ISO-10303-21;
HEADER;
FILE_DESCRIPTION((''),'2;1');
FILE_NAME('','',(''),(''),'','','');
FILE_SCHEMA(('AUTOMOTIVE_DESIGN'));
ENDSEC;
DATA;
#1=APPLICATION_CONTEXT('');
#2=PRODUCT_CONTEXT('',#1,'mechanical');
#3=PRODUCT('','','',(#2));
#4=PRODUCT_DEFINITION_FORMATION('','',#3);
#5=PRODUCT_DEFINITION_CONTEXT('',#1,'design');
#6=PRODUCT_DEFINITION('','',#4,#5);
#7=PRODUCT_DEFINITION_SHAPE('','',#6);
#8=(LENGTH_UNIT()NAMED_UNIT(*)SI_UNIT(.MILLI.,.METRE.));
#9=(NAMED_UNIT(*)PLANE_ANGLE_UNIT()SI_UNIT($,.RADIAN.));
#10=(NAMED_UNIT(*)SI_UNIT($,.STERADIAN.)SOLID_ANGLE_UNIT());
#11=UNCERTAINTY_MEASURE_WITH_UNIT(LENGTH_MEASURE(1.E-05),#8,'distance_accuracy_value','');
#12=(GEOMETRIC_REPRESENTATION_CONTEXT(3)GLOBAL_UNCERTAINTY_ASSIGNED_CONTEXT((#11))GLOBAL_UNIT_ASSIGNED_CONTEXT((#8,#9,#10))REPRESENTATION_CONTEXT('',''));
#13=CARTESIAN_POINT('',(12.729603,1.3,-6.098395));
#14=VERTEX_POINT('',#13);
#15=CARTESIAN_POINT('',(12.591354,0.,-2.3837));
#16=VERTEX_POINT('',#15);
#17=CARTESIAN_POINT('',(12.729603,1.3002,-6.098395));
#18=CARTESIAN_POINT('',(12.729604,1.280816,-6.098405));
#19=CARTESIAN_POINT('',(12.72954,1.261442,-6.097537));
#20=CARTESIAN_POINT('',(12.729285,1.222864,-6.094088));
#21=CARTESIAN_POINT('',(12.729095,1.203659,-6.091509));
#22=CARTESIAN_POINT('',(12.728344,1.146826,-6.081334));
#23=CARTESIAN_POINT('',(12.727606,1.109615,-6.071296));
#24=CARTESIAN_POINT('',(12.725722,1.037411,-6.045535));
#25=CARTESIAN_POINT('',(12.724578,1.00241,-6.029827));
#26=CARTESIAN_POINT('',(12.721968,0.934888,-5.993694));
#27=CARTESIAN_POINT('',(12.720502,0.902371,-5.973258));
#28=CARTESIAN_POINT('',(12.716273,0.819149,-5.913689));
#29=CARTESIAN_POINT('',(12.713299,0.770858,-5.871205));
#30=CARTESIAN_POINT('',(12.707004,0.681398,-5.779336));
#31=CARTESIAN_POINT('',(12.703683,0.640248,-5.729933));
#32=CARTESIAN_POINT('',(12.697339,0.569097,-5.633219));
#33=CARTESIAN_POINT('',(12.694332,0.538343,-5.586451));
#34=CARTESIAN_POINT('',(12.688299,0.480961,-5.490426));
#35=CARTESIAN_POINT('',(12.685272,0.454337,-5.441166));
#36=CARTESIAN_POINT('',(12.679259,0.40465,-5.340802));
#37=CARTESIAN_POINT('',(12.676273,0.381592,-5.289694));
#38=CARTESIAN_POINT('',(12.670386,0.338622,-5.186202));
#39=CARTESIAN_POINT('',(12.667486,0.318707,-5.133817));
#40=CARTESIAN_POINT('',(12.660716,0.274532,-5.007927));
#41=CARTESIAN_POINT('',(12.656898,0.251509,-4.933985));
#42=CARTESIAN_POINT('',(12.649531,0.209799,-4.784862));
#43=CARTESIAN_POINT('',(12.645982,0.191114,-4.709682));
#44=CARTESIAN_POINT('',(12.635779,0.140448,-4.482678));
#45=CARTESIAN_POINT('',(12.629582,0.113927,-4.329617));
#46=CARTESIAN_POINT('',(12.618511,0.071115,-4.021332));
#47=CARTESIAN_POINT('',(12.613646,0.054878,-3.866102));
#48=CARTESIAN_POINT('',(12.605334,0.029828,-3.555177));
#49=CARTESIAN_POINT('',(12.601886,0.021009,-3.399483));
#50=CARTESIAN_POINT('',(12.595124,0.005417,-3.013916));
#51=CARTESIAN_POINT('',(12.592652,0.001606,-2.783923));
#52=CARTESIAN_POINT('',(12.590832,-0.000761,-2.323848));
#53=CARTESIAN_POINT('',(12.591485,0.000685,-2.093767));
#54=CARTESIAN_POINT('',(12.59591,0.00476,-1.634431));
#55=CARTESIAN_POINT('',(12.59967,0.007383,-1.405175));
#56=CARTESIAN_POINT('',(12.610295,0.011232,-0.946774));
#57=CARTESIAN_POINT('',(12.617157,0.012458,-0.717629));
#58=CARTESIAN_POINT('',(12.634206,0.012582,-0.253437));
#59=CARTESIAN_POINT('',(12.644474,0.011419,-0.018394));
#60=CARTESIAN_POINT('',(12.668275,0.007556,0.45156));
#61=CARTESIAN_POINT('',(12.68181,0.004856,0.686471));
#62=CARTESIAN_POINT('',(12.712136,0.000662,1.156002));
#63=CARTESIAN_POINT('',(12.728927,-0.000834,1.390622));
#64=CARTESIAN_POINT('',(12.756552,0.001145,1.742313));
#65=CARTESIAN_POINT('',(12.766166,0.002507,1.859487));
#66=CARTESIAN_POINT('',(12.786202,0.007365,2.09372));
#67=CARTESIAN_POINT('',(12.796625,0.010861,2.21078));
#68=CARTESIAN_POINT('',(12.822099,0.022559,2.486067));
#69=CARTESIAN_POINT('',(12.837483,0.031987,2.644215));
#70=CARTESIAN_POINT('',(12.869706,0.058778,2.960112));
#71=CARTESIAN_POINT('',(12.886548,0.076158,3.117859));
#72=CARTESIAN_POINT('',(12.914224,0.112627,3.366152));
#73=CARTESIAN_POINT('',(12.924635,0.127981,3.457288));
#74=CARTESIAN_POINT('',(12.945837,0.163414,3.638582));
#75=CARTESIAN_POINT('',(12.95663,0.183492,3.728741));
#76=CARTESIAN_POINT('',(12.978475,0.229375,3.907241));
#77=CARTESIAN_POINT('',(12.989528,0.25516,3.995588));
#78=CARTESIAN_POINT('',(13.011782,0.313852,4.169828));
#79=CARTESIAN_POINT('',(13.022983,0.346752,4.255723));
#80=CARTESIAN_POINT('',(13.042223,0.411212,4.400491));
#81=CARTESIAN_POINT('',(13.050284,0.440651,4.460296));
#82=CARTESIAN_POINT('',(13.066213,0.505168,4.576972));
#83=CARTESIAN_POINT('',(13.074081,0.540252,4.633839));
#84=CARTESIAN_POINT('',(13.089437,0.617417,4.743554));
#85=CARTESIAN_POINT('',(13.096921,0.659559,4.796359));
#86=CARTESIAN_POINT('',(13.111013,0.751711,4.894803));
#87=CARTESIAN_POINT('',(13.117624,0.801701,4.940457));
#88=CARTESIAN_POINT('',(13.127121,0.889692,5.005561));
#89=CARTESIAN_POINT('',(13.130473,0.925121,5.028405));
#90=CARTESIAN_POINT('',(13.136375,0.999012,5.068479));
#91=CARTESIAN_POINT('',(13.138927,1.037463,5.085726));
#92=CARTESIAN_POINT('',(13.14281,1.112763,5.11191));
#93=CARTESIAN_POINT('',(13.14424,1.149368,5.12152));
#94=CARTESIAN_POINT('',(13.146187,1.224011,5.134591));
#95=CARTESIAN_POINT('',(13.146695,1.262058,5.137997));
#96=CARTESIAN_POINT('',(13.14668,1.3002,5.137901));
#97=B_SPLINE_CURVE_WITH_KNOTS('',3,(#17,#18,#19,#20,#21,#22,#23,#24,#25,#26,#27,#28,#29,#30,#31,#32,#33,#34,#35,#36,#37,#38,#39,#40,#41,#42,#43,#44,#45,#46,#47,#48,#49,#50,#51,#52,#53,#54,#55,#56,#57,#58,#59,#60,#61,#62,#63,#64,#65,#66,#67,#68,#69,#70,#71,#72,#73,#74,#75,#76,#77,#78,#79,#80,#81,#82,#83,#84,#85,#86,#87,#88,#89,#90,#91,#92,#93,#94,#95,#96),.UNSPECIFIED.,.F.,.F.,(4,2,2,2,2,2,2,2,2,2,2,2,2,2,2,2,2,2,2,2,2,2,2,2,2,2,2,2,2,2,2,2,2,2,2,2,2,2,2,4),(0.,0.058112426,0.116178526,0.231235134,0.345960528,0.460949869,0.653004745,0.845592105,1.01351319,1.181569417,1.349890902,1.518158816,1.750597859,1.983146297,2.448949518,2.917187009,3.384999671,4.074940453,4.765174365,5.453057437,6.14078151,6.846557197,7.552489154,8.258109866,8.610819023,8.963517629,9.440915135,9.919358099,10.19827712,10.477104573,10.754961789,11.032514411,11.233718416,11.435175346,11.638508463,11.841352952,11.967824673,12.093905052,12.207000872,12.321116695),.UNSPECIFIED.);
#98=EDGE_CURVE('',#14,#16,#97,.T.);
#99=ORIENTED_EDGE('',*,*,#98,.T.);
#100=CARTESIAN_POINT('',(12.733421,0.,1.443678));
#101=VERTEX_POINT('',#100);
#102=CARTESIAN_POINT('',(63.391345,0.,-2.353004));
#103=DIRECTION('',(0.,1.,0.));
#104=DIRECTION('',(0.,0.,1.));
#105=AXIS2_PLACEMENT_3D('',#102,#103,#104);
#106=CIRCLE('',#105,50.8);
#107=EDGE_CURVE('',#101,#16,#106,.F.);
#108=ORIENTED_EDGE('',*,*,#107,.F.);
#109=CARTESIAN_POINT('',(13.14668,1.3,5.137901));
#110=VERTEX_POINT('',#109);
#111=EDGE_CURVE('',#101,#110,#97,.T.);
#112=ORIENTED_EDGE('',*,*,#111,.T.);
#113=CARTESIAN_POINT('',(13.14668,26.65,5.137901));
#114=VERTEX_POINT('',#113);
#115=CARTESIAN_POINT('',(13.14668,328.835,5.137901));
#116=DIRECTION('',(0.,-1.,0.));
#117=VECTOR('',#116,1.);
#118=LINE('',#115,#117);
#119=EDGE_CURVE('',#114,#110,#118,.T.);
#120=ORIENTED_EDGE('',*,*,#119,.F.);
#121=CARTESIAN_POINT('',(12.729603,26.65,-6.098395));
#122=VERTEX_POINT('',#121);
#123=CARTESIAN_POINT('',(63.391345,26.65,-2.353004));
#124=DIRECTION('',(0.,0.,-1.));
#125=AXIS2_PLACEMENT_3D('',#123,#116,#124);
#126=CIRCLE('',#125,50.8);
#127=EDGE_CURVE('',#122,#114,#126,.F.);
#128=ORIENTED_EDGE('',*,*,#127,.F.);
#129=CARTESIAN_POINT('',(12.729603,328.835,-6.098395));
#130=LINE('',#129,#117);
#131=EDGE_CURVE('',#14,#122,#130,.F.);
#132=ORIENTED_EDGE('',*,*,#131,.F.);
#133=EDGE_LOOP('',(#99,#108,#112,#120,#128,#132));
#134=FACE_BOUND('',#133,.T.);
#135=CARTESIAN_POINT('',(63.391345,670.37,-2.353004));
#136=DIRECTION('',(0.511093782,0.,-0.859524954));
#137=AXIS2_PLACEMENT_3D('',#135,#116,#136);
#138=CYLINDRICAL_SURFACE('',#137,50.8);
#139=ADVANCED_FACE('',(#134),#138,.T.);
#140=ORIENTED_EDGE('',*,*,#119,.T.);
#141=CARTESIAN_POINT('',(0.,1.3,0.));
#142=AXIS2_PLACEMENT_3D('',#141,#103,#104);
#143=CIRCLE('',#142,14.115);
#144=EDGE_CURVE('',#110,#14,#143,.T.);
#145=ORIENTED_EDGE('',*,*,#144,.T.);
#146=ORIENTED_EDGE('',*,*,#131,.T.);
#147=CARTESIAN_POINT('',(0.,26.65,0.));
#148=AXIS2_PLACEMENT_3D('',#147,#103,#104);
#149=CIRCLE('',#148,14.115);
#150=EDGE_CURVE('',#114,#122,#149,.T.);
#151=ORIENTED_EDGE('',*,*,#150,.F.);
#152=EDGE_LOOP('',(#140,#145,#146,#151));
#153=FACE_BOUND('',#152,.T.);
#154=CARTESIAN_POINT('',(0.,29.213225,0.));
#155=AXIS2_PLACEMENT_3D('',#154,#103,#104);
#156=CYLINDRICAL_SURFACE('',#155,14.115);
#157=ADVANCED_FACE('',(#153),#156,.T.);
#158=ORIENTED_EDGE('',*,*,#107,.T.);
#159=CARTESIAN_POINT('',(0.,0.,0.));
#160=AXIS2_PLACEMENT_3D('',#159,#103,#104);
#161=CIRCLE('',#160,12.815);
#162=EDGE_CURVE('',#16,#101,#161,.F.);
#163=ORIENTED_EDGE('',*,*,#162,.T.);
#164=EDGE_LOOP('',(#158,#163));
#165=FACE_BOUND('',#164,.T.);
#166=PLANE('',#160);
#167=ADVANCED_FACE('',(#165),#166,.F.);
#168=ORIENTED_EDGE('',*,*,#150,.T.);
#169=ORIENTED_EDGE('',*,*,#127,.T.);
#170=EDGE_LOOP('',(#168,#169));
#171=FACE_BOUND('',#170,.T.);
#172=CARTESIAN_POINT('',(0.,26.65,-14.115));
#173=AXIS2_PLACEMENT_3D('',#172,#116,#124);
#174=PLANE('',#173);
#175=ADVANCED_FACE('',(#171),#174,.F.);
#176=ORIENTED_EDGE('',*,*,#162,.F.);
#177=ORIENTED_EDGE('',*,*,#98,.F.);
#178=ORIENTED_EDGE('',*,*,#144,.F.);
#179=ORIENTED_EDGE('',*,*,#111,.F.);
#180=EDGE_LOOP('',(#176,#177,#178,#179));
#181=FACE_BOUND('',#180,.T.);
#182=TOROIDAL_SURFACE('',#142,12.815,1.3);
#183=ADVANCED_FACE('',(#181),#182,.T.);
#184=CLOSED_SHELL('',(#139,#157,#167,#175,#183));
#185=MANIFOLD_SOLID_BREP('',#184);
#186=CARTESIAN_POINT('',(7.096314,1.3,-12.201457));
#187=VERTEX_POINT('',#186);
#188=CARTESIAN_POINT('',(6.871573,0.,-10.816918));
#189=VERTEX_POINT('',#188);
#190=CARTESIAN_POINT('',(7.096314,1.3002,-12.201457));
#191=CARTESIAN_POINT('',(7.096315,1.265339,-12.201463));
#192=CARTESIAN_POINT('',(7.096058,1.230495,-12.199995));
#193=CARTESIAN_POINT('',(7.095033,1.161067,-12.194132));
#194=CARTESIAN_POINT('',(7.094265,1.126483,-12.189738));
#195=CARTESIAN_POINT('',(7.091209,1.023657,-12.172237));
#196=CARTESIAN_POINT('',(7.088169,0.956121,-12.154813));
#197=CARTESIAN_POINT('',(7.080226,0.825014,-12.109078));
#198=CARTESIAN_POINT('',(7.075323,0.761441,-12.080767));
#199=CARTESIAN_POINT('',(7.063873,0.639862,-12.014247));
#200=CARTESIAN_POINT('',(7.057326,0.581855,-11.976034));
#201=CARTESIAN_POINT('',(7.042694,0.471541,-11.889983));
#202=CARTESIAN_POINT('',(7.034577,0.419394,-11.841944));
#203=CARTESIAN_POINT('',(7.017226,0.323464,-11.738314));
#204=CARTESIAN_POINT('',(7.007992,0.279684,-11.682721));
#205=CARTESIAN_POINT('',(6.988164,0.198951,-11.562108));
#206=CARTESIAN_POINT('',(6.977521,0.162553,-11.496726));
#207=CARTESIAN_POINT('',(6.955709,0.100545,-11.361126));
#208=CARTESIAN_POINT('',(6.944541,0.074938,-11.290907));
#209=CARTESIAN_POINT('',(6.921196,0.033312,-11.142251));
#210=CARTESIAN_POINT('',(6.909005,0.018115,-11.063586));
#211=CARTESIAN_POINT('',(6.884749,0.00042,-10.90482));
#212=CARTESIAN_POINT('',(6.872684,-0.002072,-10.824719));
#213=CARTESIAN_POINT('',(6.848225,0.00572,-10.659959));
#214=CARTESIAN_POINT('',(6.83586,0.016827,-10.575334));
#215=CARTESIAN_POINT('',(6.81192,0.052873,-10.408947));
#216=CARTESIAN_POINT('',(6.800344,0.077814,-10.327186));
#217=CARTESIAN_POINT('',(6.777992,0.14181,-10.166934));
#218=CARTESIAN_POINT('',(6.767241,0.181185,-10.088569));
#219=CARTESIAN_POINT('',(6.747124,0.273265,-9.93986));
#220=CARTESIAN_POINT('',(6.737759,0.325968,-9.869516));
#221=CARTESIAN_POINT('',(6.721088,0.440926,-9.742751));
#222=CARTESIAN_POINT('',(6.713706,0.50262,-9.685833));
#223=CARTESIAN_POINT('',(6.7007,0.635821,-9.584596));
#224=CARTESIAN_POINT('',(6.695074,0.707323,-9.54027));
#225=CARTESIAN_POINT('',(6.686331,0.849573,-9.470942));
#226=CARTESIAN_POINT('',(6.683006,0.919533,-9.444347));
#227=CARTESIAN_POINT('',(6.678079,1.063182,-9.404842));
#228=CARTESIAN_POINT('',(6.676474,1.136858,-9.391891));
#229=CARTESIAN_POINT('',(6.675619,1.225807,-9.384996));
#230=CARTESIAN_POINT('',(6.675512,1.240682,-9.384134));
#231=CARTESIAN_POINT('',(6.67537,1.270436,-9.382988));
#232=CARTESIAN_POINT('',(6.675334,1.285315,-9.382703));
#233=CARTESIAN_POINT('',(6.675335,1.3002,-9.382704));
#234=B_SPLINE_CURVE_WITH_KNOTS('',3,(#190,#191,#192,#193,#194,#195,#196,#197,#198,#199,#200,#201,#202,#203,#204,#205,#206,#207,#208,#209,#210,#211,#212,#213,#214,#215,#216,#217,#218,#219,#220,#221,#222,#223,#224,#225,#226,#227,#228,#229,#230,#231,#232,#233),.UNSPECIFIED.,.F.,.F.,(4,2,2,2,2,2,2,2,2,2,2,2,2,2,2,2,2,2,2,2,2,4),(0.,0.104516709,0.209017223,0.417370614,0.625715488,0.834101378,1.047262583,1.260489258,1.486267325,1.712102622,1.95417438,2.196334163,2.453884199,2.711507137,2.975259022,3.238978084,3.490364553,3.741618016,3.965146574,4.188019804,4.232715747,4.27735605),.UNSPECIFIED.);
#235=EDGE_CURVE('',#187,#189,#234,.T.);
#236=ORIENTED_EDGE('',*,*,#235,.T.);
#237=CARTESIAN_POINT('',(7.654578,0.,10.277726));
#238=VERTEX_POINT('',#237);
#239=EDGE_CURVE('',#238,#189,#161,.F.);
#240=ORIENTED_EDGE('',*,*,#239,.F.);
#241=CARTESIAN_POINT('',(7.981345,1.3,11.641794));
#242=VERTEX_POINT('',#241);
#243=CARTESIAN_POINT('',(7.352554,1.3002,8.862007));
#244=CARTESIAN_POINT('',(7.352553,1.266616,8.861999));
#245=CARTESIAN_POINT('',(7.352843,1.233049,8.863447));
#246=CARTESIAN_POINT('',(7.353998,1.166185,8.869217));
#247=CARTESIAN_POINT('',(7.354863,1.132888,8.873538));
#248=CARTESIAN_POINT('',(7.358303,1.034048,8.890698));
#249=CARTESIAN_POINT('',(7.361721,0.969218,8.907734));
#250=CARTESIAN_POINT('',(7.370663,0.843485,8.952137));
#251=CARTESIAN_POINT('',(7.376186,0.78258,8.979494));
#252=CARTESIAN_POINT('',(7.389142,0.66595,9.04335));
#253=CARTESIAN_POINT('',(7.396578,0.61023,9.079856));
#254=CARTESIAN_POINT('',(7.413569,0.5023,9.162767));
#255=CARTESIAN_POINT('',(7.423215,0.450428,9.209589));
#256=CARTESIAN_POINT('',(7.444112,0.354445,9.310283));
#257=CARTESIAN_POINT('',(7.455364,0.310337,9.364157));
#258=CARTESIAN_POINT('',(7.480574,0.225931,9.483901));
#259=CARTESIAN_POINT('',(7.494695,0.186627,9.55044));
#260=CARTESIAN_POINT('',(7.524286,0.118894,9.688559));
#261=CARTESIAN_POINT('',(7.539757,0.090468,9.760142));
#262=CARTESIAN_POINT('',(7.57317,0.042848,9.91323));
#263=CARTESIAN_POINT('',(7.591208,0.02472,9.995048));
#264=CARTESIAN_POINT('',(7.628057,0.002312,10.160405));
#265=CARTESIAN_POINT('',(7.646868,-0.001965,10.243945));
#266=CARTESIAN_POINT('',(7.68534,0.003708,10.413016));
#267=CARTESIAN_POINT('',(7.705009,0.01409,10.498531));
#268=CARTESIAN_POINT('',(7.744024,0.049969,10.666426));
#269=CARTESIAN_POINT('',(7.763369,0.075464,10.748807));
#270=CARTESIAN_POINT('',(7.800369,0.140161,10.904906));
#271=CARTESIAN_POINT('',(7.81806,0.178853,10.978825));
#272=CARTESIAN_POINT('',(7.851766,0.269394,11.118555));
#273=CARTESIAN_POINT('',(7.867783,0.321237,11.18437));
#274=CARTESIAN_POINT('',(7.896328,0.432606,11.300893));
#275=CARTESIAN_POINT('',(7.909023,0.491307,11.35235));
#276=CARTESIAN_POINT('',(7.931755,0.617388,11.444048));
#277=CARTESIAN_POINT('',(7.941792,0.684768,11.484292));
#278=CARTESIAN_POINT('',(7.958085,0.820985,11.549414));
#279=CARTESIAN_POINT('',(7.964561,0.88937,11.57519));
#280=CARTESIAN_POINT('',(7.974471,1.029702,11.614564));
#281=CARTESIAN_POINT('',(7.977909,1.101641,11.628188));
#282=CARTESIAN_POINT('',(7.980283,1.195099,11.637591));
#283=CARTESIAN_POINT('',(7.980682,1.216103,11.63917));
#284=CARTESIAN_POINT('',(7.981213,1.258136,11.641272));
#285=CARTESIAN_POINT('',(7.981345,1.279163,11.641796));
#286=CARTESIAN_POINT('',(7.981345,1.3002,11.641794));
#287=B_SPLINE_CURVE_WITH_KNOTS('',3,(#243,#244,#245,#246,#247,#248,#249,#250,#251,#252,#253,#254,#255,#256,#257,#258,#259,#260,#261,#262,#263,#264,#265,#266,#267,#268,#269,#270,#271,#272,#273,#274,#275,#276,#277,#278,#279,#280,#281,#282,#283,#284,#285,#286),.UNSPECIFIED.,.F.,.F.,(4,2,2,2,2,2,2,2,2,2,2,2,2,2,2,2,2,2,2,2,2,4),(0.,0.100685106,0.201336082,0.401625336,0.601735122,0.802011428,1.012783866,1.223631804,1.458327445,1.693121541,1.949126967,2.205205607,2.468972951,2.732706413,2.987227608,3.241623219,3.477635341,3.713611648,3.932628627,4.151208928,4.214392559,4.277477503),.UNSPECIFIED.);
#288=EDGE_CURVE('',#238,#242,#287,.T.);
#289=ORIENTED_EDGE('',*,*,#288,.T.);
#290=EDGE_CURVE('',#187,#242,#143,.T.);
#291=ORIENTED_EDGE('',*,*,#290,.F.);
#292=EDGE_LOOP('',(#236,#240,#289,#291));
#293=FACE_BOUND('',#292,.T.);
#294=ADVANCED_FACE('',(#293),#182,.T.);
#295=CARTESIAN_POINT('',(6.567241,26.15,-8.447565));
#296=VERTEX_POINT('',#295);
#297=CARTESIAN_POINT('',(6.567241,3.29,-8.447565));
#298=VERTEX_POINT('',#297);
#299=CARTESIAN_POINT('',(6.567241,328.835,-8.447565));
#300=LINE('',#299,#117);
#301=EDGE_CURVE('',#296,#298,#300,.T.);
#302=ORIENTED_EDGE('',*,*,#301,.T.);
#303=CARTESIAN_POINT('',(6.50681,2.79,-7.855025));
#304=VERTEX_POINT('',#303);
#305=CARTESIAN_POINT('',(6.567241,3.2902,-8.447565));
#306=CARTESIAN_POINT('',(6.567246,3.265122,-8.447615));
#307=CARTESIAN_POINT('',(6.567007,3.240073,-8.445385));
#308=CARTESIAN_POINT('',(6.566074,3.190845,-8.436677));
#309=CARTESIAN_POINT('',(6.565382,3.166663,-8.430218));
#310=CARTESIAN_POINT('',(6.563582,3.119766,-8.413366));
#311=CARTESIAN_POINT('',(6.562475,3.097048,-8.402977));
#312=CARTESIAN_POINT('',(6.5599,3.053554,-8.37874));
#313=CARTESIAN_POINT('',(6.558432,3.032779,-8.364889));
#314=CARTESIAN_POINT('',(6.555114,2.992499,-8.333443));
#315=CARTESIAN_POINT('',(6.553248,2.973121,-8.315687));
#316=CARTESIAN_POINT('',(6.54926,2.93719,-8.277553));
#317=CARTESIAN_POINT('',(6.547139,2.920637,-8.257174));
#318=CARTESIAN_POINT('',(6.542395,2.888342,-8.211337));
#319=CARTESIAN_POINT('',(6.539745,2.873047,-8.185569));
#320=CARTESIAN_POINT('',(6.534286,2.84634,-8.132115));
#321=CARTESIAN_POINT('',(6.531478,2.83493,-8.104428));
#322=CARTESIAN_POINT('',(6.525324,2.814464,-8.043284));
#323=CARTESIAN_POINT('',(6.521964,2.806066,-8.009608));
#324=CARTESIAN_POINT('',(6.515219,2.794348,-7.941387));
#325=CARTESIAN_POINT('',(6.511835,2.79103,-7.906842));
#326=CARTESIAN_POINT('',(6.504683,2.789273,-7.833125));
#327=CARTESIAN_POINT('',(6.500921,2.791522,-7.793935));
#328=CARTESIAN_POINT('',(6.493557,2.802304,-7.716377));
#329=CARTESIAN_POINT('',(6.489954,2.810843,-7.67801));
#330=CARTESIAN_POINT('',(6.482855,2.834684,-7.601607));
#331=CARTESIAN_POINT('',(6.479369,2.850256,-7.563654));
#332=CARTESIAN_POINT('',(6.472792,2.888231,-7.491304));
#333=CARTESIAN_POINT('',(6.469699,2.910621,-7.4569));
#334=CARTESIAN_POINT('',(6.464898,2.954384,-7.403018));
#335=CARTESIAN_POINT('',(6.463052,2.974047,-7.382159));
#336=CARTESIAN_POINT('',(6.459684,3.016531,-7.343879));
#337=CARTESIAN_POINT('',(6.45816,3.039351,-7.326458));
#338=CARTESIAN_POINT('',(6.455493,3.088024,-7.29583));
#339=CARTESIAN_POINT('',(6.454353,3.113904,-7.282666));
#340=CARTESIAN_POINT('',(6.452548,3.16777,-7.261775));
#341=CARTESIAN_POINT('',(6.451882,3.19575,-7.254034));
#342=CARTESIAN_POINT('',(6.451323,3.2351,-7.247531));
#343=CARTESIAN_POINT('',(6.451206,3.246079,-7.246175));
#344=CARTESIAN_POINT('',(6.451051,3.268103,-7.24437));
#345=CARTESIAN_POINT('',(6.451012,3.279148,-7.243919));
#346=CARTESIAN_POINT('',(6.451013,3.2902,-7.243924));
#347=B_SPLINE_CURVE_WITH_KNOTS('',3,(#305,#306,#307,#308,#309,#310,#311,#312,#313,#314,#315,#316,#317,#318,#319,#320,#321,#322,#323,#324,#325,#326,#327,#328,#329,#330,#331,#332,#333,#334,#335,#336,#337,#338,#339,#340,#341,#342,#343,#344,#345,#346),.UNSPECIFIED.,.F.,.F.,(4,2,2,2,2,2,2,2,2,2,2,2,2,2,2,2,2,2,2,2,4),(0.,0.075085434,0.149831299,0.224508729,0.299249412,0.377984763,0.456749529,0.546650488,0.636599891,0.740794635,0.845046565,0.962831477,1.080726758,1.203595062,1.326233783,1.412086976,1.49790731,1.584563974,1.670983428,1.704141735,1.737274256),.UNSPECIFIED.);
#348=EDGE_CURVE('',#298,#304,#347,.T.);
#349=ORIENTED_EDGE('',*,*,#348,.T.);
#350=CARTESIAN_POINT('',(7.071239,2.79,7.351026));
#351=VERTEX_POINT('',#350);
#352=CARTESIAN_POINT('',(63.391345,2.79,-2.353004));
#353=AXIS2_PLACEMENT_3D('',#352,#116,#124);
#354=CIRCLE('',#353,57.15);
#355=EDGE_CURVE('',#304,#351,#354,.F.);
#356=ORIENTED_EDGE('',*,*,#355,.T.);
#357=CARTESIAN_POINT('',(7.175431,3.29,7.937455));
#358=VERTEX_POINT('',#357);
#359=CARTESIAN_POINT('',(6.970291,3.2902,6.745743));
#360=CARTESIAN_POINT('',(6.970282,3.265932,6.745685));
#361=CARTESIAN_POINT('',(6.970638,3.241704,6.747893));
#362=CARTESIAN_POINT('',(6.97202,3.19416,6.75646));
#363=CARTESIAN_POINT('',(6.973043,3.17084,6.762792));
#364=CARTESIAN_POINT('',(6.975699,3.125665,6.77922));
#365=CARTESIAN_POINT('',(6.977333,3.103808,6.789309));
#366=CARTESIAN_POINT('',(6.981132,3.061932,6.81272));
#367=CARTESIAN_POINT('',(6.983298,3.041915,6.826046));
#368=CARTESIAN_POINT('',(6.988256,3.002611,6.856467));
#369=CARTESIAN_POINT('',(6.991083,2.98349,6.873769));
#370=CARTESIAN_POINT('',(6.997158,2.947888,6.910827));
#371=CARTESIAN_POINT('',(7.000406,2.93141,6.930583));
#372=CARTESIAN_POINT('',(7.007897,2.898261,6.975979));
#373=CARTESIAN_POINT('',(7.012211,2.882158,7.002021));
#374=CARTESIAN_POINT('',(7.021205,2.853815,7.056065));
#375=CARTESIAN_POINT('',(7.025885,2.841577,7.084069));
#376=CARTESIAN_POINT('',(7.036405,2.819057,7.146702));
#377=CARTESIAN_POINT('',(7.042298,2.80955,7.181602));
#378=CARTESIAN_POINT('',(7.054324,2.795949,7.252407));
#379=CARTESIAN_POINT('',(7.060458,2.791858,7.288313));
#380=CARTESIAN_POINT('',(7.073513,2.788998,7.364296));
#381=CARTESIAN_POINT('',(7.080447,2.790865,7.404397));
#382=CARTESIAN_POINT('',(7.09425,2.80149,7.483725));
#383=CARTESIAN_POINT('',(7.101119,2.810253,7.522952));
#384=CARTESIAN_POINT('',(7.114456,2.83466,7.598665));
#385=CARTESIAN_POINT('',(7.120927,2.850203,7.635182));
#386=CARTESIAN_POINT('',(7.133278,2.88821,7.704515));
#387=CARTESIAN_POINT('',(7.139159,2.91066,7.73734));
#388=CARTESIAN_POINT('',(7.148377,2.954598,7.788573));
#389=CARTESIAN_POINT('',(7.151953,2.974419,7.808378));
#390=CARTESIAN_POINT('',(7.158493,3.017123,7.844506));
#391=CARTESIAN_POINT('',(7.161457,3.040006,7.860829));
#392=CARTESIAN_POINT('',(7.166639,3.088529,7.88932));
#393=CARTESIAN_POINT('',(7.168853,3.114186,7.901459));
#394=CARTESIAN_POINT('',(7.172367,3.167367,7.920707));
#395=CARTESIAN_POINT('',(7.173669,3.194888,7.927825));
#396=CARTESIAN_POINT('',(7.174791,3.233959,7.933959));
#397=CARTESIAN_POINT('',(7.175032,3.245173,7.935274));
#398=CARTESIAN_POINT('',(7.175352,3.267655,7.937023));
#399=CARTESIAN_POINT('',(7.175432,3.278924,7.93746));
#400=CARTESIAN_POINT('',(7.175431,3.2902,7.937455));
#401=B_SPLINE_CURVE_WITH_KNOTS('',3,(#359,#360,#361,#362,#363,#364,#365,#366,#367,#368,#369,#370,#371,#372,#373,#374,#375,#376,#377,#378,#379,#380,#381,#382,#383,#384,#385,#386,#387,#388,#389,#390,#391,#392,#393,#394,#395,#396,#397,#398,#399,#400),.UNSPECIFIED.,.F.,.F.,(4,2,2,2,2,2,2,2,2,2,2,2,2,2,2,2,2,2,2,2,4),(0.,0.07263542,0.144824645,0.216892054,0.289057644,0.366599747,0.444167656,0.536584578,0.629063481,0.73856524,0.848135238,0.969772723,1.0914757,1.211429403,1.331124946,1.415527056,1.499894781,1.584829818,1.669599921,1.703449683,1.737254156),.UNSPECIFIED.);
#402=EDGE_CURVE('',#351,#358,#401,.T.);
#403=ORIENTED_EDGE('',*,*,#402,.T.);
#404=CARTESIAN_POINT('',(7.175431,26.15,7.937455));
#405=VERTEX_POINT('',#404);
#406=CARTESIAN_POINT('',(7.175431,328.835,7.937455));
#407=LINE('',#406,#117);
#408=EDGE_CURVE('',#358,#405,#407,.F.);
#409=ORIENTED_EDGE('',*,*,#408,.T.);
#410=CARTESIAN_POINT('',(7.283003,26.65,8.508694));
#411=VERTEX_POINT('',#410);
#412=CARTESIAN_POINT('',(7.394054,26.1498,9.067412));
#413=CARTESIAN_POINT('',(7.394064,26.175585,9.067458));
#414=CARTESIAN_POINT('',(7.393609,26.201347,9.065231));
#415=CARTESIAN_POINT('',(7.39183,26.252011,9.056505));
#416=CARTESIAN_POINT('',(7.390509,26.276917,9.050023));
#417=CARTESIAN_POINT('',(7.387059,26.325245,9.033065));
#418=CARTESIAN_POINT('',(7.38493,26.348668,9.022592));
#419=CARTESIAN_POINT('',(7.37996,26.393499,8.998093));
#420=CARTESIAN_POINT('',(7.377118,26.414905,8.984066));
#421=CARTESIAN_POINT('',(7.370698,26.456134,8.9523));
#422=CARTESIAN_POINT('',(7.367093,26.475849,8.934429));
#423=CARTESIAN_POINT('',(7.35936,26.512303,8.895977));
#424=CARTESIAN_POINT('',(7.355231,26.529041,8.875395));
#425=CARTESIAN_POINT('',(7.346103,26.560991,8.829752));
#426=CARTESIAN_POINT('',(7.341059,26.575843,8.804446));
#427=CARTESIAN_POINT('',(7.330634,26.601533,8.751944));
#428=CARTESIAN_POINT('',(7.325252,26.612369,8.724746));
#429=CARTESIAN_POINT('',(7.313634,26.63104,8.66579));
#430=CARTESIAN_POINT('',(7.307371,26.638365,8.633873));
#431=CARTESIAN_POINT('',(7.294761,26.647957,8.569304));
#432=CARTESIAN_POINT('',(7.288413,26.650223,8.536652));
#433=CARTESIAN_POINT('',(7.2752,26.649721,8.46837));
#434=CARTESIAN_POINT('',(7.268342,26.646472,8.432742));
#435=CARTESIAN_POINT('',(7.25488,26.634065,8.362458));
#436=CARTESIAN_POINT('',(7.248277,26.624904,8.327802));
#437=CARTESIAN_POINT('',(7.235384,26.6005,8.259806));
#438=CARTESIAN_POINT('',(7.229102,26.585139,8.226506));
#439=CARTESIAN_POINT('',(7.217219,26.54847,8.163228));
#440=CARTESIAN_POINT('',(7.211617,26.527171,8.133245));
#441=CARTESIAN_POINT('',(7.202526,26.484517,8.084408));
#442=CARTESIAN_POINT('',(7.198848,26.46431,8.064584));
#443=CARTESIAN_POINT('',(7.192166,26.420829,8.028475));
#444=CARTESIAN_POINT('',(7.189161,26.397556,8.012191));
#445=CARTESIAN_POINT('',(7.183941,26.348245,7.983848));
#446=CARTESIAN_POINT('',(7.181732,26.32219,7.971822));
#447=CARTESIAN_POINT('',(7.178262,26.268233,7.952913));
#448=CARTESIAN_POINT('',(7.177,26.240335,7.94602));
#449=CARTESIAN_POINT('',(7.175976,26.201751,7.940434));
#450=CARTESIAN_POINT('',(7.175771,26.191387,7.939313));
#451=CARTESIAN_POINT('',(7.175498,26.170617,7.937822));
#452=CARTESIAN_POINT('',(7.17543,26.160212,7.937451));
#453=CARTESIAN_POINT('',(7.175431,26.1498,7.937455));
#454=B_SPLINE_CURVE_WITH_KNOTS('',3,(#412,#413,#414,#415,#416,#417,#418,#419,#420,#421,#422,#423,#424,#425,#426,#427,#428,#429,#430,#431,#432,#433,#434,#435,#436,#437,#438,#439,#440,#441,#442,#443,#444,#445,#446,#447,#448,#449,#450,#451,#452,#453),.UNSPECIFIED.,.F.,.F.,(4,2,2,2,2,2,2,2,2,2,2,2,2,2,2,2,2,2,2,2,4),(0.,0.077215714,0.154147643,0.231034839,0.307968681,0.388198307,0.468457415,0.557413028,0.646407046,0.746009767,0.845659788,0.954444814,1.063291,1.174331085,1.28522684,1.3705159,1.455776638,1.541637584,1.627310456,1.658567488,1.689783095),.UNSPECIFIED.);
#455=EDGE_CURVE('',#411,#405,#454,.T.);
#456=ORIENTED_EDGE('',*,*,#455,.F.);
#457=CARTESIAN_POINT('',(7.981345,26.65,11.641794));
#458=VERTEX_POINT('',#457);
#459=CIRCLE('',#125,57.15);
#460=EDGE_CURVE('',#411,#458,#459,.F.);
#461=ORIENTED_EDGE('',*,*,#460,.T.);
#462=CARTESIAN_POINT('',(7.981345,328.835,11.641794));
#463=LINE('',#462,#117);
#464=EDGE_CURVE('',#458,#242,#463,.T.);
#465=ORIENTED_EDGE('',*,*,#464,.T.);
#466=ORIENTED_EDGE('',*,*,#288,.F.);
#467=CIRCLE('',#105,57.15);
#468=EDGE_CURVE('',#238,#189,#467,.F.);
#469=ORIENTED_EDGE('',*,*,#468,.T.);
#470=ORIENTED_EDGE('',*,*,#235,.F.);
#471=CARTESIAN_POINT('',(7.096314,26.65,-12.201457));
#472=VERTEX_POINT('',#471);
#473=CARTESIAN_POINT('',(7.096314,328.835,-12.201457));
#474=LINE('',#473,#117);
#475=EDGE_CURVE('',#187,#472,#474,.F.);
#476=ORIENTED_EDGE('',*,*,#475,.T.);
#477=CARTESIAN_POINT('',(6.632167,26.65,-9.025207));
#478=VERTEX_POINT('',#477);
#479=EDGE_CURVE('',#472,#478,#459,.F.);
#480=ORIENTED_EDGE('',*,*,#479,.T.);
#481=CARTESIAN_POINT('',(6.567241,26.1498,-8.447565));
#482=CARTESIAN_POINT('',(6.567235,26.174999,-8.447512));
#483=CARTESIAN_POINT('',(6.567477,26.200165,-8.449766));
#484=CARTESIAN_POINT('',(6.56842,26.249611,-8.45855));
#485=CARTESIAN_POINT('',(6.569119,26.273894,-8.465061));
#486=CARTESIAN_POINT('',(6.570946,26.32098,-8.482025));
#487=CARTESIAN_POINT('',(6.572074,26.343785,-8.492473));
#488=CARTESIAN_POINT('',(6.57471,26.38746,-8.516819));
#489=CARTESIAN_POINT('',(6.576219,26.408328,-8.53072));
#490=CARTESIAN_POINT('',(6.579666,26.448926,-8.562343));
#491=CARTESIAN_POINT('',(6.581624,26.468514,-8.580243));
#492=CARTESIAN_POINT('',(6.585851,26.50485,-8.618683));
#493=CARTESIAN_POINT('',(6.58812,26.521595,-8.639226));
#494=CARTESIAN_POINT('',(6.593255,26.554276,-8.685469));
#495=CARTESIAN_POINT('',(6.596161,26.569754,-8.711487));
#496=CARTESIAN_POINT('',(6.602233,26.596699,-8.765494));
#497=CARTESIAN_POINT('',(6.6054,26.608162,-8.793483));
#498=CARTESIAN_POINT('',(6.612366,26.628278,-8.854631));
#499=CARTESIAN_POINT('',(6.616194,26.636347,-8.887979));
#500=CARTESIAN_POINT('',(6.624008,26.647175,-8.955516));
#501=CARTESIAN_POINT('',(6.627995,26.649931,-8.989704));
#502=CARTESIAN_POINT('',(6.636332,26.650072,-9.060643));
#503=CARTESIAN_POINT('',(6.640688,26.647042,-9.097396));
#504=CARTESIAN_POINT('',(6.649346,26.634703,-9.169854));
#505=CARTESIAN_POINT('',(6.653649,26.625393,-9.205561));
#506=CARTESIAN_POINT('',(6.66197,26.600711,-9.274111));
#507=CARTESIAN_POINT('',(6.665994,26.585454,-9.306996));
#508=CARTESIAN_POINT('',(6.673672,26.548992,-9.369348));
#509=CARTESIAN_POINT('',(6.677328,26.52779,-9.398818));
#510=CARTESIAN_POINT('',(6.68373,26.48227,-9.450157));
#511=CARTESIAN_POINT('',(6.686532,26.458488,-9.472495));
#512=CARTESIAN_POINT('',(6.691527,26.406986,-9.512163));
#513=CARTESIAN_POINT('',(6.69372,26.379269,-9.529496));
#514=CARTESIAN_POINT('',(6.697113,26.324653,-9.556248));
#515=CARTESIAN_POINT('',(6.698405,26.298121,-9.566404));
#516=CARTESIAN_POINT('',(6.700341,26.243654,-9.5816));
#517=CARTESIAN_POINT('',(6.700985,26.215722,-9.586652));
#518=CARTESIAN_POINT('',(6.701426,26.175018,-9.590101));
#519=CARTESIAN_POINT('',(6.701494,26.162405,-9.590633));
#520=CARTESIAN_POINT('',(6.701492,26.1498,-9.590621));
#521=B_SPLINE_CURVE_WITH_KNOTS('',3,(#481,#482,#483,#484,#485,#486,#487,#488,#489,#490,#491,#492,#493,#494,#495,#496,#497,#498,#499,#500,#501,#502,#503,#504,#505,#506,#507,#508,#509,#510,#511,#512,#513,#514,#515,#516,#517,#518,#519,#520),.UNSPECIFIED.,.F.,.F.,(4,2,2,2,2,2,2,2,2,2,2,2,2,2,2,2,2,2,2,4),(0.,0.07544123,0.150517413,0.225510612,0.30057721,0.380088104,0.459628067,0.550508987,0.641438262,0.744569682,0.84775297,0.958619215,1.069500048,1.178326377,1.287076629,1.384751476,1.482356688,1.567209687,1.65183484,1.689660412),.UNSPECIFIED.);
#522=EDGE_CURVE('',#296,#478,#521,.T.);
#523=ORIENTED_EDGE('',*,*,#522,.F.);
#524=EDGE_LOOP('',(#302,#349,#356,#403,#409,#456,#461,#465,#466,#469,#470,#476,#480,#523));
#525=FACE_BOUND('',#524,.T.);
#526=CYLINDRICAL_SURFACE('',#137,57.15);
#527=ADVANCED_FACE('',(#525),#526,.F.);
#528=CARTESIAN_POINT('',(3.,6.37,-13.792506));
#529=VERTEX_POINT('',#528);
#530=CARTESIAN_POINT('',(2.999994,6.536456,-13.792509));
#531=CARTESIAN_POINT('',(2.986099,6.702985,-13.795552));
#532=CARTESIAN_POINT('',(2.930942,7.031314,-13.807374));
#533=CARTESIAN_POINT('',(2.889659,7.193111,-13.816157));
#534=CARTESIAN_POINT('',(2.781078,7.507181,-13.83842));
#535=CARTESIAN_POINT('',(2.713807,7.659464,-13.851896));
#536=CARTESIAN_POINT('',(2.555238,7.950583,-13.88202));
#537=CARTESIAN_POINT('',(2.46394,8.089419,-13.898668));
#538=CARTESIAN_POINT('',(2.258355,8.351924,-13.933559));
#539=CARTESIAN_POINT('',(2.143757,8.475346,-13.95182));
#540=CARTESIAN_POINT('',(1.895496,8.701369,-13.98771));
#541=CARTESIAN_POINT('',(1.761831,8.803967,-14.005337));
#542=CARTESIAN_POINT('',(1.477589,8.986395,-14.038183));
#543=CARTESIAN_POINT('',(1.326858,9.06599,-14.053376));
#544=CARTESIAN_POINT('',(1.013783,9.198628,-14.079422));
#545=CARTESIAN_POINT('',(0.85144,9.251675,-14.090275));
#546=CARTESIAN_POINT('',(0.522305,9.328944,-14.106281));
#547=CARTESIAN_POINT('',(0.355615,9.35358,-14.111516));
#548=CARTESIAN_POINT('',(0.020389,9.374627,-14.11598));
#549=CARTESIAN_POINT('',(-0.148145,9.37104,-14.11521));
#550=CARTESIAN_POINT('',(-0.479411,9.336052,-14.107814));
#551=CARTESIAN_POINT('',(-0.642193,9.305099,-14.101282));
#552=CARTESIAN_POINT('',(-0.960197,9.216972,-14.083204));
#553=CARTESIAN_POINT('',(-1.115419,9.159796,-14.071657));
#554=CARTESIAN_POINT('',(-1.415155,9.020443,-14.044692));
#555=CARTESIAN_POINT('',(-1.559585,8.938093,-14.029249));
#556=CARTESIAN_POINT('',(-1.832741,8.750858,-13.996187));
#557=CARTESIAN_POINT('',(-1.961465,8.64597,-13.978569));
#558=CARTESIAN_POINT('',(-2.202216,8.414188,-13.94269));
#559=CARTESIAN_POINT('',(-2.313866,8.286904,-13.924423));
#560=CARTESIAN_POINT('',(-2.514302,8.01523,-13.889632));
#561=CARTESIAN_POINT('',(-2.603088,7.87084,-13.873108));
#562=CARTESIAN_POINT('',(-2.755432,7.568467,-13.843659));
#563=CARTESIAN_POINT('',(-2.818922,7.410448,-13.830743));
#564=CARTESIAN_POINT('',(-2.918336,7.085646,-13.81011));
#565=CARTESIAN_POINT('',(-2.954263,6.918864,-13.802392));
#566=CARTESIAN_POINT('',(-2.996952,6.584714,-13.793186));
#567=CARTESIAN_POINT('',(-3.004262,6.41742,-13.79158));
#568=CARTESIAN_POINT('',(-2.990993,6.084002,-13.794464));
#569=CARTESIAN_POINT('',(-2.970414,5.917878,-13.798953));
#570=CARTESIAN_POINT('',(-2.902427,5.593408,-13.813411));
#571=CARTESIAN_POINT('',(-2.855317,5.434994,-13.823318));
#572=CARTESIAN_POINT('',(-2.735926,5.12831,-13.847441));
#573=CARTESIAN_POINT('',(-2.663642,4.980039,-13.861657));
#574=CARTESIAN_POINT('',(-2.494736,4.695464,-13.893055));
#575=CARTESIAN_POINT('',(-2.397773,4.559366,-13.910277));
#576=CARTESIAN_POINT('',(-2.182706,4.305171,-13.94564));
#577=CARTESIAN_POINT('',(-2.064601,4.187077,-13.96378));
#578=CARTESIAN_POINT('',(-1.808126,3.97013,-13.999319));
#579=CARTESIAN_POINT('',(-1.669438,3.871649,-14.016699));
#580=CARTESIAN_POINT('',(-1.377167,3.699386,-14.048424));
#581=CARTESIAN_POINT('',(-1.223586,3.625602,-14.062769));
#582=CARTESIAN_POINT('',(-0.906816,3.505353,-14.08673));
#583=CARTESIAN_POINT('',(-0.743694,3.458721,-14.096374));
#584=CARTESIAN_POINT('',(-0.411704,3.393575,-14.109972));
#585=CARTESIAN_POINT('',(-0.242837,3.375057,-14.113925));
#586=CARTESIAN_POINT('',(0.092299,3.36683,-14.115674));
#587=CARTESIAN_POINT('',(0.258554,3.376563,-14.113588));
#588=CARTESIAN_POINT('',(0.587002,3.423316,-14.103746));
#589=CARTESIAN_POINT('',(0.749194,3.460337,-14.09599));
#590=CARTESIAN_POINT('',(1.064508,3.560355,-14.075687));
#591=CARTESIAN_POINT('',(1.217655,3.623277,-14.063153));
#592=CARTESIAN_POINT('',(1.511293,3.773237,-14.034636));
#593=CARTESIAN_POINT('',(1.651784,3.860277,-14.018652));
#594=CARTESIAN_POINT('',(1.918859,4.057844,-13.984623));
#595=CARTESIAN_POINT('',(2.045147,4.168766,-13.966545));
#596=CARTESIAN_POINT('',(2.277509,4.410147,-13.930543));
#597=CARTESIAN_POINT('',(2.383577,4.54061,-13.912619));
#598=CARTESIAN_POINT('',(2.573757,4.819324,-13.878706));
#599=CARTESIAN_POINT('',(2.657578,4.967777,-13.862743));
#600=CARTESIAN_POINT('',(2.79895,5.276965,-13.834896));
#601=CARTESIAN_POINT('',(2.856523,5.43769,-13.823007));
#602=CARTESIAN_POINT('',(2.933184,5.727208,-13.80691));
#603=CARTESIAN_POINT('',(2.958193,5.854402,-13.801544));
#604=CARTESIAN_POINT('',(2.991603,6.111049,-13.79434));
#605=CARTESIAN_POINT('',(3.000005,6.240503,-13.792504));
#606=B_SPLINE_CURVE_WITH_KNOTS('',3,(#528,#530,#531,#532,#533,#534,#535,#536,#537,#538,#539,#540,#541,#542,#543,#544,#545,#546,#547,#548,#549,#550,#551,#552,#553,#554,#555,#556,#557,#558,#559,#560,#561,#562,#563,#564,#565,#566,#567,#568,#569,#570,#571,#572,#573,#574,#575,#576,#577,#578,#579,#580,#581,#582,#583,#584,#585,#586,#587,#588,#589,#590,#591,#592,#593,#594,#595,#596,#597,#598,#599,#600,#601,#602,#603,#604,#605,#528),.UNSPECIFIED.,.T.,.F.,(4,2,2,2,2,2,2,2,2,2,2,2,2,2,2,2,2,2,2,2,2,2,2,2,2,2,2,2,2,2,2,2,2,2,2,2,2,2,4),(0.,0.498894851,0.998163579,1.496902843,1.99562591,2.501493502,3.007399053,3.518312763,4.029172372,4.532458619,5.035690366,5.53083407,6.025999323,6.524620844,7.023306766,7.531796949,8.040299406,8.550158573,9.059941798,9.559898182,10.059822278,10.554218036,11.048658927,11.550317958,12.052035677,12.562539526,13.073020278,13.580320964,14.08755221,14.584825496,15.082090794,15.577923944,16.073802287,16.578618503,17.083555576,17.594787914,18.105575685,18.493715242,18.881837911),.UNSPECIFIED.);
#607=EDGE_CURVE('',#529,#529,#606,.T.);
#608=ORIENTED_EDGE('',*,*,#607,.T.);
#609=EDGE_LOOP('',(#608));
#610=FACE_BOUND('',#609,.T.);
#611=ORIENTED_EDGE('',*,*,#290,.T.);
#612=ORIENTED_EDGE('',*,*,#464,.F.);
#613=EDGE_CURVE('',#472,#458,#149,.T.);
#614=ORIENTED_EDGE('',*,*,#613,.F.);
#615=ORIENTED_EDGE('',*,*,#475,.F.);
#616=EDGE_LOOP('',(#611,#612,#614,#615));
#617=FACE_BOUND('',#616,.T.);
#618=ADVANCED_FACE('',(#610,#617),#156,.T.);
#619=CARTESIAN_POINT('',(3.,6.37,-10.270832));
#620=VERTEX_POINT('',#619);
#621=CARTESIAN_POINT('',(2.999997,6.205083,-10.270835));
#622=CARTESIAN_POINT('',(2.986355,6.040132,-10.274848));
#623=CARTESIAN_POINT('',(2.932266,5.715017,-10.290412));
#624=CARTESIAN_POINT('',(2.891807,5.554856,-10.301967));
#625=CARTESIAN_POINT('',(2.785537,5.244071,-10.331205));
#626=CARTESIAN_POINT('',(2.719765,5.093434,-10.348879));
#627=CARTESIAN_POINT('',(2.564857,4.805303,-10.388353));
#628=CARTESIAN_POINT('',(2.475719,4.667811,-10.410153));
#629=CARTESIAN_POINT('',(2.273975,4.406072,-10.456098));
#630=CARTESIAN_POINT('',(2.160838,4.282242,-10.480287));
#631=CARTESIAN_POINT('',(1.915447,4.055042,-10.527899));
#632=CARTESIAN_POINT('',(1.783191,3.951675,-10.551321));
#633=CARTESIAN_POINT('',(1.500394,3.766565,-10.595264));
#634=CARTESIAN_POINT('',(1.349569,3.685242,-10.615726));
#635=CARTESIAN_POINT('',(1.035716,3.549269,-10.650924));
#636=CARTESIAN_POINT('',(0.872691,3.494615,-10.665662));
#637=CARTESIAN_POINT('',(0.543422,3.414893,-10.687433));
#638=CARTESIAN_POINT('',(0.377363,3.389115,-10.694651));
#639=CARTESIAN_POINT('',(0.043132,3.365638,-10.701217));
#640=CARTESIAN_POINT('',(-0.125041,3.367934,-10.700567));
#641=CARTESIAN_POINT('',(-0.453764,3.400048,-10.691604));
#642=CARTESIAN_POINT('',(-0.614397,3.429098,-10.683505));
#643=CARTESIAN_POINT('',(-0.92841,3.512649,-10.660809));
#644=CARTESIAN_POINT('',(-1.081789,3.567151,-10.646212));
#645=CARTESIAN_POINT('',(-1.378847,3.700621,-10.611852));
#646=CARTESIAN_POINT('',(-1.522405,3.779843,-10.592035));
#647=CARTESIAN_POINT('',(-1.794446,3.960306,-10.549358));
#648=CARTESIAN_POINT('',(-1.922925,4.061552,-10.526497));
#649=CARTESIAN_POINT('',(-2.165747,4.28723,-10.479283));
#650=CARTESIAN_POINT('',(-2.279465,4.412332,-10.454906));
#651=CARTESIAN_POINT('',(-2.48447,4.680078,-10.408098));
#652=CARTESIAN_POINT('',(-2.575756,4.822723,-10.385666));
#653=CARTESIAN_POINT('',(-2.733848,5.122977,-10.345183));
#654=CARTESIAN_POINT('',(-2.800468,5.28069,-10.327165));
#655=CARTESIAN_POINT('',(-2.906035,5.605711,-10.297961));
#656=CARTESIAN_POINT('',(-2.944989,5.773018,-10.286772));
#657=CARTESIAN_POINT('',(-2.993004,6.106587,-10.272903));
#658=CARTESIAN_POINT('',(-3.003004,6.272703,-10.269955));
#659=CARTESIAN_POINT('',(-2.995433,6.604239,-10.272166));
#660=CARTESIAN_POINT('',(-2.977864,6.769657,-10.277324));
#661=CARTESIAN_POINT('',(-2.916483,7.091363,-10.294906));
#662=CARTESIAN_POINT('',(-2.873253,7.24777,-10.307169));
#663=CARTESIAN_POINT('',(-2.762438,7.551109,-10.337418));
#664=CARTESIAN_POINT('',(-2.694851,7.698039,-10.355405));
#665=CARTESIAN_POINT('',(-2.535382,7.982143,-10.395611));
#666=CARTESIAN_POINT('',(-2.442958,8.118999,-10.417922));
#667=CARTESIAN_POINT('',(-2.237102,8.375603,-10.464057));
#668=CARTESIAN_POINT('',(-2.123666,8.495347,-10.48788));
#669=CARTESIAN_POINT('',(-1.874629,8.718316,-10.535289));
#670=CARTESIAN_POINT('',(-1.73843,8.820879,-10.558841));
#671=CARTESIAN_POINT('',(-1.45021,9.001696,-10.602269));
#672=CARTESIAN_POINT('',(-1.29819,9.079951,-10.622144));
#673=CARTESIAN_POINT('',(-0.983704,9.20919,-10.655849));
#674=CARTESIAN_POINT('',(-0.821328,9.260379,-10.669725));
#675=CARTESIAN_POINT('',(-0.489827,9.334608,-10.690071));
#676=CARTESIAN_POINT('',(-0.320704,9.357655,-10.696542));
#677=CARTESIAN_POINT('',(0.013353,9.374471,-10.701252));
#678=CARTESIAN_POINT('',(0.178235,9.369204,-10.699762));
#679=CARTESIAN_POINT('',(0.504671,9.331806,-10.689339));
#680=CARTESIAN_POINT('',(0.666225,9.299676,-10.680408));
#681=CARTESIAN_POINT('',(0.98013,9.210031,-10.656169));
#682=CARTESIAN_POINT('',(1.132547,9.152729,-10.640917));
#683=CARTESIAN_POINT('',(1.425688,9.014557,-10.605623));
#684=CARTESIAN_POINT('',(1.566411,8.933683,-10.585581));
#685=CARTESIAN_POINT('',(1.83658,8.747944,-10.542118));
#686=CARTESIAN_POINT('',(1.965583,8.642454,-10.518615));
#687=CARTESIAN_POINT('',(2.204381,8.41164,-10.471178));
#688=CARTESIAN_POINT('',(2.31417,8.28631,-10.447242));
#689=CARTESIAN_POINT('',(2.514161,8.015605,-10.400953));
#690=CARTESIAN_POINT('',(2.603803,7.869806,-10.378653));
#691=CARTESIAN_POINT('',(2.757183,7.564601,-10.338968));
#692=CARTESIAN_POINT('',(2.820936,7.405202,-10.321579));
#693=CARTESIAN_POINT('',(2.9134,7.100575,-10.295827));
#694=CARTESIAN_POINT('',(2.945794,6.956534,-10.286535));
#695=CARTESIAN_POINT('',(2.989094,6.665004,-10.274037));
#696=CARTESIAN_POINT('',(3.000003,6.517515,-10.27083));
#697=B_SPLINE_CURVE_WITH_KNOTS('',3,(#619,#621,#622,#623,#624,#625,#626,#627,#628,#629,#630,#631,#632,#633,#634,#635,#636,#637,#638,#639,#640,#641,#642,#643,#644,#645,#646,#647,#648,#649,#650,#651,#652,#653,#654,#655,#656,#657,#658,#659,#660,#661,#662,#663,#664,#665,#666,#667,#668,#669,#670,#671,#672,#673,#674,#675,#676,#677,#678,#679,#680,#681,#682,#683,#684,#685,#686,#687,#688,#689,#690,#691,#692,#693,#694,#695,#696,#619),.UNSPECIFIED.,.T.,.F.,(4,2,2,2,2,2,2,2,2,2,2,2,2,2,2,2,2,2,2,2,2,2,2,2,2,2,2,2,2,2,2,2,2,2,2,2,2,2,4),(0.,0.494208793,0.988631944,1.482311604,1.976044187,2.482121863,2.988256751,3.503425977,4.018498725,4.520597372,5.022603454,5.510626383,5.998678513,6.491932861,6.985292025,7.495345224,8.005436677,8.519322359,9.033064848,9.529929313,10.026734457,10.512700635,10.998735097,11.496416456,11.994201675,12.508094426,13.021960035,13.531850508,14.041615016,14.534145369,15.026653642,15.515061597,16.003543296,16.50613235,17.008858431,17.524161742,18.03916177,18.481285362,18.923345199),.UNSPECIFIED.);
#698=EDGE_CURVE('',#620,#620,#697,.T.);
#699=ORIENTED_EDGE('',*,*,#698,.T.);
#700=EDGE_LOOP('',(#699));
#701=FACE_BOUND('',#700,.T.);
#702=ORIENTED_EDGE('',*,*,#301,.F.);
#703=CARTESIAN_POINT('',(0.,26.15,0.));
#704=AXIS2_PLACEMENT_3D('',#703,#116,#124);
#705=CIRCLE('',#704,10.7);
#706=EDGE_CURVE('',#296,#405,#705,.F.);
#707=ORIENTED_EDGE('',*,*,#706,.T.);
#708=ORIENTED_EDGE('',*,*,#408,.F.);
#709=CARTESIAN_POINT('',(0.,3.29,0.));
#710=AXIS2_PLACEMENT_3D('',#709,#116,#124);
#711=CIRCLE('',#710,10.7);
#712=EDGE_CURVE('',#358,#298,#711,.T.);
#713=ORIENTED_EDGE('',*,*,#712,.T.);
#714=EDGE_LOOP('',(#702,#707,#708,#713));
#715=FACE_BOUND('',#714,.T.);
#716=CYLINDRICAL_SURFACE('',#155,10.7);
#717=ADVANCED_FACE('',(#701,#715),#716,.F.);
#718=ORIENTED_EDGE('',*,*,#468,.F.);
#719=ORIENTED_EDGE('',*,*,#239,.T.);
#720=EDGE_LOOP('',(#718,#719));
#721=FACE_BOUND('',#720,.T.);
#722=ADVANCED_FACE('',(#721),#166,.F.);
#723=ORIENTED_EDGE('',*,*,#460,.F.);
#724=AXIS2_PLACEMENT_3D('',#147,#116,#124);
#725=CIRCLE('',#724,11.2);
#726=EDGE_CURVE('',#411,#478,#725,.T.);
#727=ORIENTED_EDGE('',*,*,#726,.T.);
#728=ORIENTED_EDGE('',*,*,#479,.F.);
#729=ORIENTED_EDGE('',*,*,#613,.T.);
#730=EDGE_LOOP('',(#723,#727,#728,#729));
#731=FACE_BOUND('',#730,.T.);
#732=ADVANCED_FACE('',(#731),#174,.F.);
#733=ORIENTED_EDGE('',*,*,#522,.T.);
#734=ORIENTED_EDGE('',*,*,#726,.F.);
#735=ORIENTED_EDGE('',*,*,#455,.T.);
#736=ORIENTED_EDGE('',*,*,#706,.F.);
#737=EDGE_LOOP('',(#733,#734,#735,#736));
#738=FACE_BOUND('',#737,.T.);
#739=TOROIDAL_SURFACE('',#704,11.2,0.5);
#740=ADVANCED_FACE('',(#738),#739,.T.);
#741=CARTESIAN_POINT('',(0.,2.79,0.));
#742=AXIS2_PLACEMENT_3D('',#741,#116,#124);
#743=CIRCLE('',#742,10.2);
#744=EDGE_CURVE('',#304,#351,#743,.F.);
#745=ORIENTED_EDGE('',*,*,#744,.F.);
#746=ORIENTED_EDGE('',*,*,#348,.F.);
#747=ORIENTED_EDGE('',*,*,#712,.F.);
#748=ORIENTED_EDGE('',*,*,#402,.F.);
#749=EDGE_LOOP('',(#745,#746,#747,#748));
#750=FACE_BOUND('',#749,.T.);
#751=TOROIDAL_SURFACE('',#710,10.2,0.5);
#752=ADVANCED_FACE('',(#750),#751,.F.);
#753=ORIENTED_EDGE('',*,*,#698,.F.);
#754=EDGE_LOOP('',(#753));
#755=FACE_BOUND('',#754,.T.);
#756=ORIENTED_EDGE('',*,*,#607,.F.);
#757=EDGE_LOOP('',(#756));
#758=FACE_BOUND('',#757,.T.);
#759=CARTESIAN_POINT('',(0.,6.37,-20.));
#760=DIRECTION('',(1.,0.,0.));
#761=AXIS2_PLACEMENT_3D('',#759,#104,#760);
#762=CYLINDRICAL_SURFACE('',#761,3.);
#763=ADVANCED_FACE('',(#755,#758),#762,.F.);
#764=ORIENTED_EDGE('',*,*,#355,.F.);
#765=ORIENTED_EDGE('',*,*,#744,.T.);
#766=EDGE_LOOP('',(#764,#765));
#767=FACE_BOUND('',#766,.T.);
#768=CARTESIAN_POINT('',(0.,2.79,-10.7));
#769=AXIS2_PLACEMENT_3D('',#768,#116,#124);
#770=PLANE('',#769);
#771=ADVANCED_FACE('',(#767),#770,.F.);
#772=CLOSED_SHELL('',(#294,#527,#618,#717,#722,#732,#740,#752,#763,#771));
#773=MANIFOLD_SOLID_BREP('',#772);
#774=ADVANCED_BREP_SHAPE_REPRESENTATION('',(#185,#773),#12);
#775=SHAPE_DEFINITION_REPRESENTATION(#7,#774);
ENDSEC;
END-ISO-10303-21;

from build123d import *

# Parameters (mm, degrees)
FILLET1_R          = 1.3
SKETCH3_R          = 3
CUT_EXTRUDE1_DEPTH = 20
FILLET3_R          = 0.5
FILLET4_R          = 0.5
CAVITY1_DEPTH      = 26.65


# Read off the part's stored shape, not the designer's step: Cavity1
with BuildPart() as part:
    # Sketch2 → Revolve1 (revolve)
    with BuildSketch(Plane(origin=(0, 0, 0), x_dir=(0, 0, -1), z_dir=(1, 0, 0)), mode=Mode.PRIVATE) as revolve1_sk:
        Polygon((0, 0), (14.115, 0), (14.115, 26.65), (10.7, 26.65), (10.7, 2.79), (0, 2.79), align=None)
    revolve(revolve1_sk.sketch.rotate(Axis((0, 29.213224894, 0), (0, -1, 0)), 180), axis=Axis((0, 29.213224894, 0), (0, -1, 0)))

    # Fillet1
    fillet1_edges = [part.edges().sort_by_distance(p)[0] for p in [
        (0, 0, -14.115),
    ]]
    fillet(fillet1_edges, radius=FILLET1_R)

    # Sketch3 → Cut-Extrude1 (cut)
    with BuildSketch(Plane.XY):
        with Locations((0, 6.37)):
            Circle(SKETCH3_R)
    extrude(amount=-CUT_EXTRUDE1_DEPTH, mode=Mode.SUBTRACT)

    # Fillet3
    fillet3_edges = [part.edges().sort_by_distance(p)[0] for p in [
        (0, 2.79, -10.7),
    ]]
    fillet(fillet3_edges, radius=FILLET3_R)

    # Fillet4
    fillet4_edges = [part.edges().sort_by_distance(p)[0] for p in [
        (0, 26.65, -10.7),
    ]]
    fillet(fillet4_edges, radius=FILLET4_R)

    # Cavity1 outline → Cavity1 (cut)
    with BuildSketch(Plane(origin=(0, 0, 0), x_dir=(1, 0, 0), z_dir=(0, 1, 0))):
        with BuildLine():
            ThreePointArc((7.981344541, -11.641793862), (11.053202959, -8.778378515), (13.146668661, -5.137930335))
            ThreePointArc((13.146668661, -5.137930335), (12.626305345, 0.468655883), (12.729603647, 6.098398951))
            ThreePointArc((12.729603647, 6.098398951), (10.37200886, 9.573643883), (7.096314041, 12.201456963))
            ThreePointArc((7.096314041, 12.201456963), (6.280674733, 0.233130633), (7.981344541, -11.641793862))
        make_face()
    extrude(amount=CAVITY1_DEPTH, mode=Mode.SUBTRACT)


solid = part.part
